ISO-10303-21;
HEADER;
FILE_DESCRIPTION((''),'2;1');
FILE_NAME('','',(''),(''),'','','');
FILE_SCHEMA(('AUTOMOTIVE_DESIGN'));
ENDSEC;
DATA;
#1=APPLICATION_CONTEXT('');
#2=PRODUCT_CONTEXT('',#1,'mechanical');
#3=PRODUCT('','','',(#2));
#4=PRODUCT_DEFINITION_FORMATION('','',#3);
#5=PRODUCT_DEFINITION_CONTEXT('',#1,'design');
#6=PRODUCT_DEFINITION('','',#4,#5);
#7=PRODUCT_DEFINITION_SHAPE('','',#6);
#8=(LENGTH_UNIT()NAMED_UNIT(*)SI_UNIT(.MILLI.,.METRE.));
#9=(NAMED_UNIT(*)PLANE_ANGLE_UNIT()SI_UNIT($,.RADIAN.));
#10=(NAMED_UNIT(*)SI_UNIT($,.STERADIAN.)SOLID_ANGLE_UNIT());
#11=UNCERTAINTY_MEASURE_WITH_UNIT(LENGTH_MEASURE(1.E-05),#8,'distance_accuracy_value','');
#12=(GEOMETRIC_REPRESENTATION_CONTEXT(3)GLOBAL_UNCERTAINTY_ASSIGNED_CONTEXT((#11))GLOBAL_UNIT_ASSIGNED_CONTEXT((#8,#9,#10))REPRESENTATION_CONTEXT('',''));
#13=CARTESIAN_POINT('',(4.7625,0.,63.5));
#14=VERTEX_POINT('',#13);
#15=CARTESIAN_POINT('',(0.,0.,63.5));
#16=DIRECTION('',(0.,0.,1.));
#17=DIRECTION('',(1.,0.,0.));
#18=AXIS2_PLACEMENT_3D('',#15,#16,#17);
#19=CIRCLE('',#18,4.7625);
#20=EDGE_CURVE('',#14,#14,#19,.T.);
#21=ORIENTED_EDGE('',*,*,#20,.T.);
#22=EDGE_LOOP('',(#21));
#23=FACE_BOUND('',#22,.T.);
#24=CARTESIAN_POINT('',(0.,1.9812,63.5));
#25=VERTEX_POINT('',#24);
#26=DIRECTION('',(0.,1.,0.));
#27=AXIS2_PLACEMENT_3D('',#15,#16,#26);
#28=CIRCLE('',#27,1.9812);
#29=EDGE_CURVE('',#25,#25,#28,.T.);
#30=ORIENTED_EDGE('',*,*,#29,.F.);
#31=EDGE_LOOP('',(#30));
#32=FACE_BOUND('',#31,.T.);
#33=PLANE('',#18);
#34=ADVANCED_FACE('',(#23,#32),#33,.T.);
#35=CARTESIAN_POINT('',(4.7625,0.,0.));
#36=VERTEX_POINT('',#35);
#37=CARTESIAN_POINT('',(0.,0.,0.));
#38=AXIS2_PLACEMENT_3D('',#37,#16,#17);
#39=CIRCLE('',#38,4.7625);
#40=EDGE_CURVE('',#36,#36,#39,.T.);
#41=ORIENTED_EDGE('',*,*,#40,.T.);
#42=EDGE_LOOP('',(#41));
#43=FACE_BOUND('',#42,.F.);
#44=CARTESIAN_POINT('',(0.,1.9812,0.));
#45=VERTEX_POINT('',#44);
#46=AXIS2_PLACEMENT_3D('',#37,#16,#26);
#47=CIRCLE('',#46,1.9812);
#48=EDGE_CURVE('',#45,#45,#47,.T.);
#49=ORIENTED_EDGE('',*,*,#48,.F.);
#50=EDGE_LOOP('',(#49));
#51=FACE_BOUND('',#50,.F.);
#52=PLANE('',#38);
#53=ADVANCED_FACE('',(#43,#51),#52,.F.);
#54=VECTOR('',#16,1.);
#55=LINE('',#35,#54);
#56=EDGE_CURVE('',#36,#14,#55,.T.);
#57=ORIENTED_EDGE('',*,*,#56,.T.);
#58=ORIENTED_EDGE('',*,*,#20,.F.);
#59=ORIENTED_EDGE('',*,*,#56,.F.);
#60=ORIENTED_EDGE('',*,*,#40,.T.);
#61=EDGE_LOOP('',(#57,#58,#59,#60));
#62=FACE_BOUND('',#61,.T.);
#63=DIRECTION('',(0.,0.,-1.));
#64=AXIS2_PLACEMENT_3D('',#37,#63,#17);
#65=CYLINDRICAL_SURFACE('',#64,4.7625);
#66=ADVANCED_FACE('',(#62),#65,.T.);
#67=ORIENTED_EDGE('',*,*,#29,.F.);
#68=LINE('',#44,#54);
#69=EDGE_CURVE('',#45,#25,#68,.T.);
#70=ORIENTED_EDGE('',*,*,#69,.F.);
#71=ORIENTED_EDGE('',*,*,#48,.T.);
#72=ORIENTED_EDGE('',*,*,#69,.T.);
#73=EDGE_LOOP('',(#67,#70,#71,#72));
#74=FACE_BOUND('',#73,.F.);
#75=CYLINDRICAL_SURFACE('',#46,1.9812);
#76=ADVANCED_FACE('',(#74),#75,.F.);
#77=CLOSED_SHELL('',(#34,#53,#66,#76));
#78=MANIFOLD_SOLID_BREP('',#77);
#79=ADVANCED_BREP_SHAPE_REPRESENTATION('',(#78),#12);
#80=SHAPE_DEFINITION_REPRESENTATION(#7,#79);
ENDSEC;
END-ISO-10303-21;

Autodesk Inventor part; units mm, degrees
ref_plane "YZ Plane" through (0, 0, 0) normal (1, 0, 0) x (0, 1, 0)
ref_plane "XZ Plane" through (0, 0, 0) normal (0, 1, 0) x (-1, 0, 0)
ref_plane "XY Plane" through (0, 0, 0) normal (0, 0, 1) x (1, 0, 0)
sketch "Sketch1" plane through (0, 0, 0) normal (0, 0, 1) x (1, 0, 0)
  circle A0 centre (0, 0) radius 4.7625
  dimension "d10" = 9.525
extrude "Extrusion1" add sketch "Sketch1" along normal blind 63.5
hole "Hole1" at (0, 0, 0) direction (0, 0, 1) diameter 3.9624 end through all thread size "10-32 UNF" class "2B" standard "ANSI Unified Screw Threads"
equation "\"d10\" = OutsideDiameter"
equation "\"d1\" = StandoffLength"
equation "\"StandoffLength\" = 63.5"
equation "\"HoleDiameter\" = 5.1054"
equation "\"OutsideDiameter\" = 9.525"
properties part number "EL2-GB-002" material "Aluminum 6061"
